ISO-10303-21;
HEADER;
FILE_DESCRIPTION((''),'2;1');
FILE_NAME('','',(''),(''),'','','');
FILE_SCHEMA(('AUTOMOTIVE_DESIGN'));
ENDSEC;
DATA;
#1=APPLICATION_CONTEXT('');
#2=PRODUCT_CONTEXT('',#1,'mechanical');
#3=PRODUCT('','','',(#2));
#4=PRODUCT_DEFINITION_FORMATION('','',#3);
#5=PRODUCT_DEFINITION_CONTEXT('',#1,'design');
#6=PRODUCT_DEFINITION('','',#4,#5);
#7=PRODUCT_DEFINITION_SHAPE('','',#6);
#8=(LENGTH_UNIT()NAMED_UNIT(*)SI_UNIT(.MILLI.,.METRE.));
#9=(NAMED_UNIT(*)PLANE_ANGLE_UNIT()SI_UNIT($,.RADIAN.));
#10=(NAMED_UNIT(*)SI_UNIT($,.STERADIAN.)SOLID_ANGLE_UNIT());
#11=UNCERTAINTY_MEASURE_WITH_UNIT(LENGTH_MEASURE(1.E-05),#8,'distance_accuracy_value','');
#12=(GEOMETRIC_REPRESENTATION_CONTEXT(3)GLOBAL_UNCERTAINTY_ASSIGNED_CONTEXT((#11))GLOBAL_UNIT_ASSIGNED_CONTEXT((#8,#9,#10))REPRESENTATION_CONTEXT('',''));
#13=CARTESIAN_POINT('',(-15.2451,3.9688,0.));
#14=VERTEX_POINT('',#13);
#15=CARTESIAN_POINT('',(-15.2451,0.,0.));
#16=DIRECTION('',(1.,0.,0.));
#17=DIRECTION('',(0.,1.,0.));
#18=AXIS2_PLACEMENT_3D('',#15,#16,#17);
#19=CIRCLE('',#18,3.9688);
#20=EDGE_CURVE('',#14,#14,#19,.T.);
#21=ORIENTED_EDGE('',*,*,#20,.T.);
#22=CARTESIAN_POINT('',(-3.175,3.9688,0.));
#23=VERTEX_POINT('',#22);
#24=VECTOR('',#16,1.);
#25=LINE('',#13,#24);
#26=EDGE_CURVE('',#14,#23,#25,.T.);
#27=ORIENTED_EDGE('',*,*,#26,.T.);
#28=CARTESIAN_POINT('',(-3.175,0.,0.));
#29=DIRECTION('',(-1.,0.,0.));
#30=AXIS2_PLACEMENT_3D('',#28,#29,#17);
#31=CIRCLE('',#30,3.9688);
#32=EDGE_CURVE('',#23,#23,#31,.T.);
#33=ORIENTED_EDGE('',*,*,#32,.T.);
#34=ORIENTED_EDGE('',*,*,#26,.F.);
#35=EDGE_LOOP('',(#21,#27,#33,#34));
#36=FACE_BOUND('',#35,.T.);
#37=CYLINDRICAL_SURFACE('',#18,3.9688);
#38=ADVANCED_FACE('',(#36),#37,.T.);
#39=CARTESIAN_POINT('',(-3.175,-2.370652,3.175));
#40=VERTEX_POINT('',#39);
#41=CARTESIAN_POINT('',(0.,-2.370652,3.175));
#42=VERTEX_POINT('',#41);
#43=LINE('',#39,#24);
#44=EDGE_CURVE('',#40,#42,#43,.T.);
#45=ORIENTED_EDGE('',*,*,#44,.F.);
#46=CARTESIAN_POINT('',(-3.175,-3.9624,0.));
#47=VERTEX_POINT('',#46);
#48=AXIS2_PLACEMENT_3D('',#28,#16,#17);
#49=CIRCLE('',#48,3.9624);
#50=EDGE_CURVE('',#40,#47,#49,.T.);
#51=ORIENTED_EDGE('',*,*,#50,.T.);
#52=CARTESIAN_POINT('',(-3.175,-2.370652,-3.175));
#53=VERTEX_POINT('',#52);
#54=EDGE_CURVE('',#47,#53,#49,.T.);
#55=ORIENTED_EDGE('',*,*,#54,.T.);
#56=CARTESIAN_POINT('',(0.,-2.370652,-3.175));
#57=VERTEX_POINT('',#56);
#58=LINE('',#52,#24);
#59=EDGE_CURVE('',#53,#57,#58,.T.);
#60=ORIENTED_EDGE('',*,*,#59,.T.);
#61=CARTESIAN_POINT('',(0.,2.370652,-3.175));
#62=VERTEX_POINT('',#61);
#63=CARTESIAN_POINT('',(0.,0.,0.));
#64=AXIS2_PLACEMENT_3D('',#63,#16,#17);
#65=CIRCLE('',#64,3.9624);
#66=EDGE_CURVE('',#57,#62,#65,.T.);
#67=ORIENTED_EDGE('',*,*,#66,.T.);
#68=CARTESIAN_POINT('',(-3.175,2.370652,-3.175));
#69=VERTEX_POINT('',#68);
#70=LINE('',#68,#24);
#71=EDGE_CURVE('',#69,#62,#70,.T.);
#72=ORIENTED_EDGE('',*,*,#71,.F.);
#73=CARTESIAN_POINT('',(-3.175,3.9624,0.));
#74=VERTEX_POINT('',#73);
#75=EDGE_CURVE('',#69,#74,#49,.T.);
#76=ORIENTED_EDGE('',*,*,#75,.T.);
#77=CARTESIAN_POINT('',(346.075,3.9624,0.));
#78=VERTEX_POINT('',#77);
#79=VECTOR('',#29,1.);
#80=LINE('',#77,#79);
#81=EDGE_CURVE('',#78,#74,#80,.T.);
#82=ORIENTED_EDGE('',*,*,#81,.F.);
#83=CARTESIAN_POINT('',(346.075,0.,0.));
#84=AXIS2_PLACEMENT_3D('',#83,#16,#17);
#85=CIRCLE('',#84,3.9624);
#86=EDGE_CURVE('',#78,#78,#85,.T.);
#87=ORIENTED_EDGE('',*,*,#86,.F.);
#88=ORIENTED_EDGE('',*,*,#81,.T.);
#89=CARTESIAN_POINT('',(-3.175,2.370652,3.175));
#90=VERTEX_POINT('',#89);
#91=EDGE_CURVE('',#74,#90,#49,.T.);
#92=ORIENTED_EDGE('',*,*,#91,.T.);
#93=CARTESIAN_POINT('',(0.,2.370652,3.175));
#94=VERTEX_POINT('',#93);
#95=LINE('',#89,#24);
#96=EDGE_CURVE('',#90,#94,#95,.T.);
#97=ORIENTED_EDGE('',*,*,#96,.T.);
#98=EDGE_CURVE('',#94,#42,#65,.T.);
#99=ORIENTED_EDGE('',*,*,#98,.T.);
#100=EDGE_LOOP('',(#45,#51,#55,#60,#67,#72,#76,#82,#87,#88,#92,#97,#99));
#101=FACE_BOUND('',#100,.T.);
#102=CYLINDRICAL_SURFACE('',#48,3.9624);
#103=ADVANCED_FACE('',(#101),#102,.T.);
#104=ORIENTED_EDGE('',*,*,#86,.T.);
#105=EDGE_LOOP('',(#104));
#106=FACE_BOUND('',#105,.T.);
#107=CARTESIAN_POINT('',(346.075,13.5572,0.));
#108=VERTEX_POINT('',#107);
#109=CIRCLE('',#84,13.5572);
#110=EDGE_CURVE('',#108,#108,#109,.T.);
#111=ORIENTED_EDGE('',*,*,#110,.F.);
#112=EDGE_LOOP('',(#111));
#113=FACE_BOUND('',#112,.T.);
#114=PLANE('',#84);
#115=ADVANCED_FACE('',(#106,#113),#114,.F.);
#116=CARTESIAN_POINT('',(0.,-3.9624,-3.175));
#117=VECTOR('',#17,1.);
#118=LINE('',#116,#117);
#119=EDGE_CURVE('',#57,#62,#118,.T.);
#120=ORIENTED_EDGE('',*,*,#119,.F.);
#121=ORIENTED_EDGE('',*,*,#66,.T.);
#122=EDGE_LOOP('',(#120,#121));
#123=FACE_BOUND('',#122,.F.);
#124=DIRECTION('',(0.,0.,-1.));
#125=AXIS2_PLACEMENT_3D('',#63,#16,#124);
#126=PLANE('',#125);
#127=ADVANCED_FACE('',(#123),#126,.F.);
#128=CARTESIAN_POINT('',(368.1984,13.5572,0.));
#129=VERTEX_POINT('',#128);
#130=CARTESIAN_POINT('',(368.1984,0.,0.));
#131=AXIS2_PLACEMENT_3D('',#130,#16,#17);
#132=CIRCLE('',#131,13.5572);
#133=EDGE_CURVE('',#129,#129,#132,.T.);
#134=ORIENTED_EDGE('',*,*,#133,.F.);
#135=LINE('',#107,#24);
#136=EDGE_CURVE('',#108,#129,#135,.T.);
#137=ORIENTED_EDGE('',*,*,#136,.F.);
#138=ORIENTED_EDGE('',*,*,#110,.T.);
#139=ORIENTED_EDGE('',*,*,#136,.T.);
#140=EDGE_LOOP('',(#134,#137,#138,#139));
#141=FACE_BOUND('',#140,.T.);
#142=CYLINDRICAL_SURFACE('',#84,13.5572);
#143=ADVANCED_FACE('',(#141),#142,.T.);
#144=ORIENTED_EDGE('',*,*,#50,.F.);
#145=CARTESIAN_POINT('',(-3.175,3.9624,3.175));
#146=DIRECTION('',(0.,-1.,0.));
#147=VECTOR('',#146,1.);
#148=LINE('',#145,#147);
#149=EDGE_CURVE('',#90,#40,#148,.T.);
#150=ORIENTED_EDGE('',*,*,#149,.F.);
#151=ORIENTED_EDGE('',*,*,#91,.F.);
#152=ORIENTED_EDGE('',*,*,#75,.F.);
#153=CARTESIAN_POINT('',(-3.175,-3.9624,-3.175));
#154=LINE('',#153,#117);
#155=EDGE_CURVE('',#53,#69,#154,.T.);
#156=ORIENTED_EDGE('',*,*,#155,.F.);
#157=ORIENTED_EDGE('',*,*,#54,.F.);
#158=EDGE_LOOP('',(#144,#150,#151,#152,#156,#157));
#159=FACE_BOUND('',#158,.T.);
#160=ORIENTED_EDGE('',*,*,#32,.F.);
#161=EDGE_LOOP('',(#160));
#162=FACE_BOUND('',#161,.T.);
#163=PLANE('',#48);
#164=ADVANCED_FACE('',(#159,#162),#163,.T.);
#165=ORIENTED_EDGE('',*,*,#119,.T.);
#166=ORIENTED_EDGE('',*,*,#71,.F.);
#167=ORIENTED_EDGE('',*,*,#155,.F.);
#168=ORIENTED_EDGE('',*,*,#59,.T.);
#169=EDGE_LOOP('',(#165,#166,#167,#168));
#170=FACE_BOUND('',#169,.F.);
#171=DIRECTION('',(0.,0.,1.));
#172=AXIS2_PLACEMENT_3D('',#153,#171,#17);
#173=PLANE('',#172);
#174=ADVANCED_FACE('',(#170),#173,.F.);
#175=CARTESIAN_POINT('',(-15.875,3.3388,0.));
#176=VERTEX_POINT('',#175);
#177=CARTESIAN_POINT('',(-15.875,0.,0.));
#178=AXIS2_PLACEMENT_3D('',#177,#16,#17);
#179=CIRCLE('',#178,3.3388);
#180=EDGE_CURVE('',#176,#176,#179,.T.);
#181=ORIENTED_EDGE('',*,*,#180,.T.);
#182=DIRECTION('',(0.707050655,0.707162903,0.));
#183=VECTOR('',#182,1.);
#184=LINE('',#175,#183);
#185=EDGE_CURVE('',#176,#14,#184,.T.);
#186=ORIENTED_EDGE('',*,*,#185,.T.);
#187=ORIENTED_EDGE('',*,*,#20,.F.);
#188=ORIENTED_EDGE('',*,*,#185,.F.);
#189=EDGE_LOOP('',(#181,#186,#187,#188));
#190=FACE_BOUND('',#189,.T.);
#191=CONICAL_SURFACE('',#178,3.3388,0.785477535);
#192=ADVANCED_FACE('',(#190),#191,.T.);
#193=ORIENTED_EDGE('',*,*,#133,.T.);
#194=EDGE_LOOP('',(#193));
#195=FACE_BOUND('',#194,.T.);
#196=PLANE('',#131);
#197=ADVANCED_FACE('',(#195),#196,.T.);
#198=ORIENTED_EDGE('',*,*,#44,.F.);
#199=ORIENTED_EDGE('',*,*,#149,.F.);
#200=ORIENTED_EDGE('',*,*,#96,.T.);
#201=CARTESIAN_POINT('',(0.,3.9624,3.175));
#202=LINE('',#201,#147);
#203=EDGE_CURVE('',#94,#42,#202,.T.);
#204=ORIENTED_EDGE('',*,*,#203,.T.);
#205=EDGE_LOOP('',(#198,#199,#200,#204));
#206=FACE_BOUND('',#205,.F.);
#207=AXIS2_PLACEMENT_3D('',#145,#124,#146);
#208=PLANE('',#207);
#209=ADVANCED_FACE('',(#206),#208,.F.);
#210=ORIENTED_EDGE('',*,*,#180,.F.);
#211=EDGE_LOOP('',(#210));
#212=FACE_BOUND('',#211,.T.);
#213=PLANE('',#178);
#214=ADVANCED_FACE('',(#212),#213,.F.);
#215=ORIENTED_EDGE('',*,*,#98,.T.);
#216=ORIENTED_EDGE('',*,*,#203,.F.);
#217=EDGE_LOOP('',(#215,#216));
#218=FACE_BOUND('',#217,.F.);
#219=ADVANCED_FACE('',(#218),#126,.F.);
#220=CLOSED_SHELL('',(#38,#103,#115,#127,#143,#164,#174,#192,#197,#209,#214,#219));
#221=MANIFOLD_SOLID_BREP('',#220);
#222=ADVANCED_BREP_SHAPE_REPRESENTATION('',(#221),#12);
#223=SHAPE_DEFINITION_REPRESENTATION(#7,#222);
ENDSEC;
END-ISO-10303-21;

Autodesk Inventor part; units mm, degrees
sketch "Sketch_1" plane through (0, 0, 0) normal (0, 0, 1) x (1, 0, 0)
  line L0 (368.1984, 0) -> (-3.175, 0)
  line L1 (-3.175, 0) -> (-3.175, 3.9624)
  line L2 (-3.175, 3.9624) -> (346.075, 3.9624)
  line L3 (346.075, 3.9624) -> (346.075, 13.5572)
  line L4 (346.075, 13.5572) -> (368.1984, 13.5572)
  line L5 (368.1984, 13.5572) -> (368.1984, 0)
  line L6 (368.1984, 0) -> (-3.175, 0)
revolve "Revolution1" add sketch "Sketch_1" angle 360 about axis through (368.1984, 0, 0) along (1, 0, 0)
sketch "Sketch_3" plane through (0, 0, 0) normal (0, 0, 1) x (1, 0, 0)
  line L0 (-3.175, 0) -> (-15.875, 0)
  line L1 (-15.875, 0) -> (-15.875, 3.3388)
  line L2 (-15.875, 3.3388) -> (-15.2451, 3.9688)
  line L3 (-15.2451, 3.9688) -> (-3.175, 3.9688)
  line L4 (-3.175, 3.9688) -> (-3.175, 0)
  line L5 (-3.175, 0) -> (-15.875, 0)
revolve "Revolution2" add sketch "Sketch_3" angle 360 about axis through (-3.175, 0, 0) along (1, 0, 0)
thread "Thread1" size "5/16-20 UN" class "3A" standard "ANSI Unified Screw Threads" full length
sketch "Sketch_10" plane through (-3.175, 0, 0) normal (1, 0, 0) x (0, 0, -1)
  line L0 (-7.9248, 7.9248) -> (-7.9248, -7.9248)
  line L1 (-7.9248, -7.9248) -> (7.9248, -7.9248)
  line L2 (7.9248, -7.9248) -> (7.9248, 7.9248)
  line L3 (7.9248, 7.9248) -> (-7.9248, 7.9248)
  line L4 (-3.175, 3.9624) -> (-3.175, -3.9624)
  line L5 (-3.175, -3.9624) -> (3.175, -3.9624)
  line L6 (3.175, -3.9624) -> (3.175, 3.9624)
  line L7 (3.175, 3.9624) -> (-3.175, 3.9624)
extrude "Extrusion1" cut sketch "Sketch_10" along normal blind 3.175
ref_plane "rod_cp_XY" through (0, 0, 0) normal (1, 0, 0) x (0, 0, -1)
ref_plane "rod_cp_YZ" through (0, 0, 0) normal (0, 0, -1) x (0, 1, 0)
ref_plane "rod_cp_ZX" through (0, 0, 0) normal (0, 1, 0) x (1, 0, 0)
ref_plane "to_rod_clevis_XY" through (-15.875, 0, 0) normal (1, 0, 0) x (0, 0, -1)
ref_plane "to_rod_clevis_YZ" through (-15.875, 0, 0) normal (0, 0, -1) x (0, 1, 0)
ref_plane "to_rod_clevis_ZX" through (-15.875, 0, 0) normal (0, 1, 0) x (1, 0, 0)
ref_plane "rl2_XY" through (-3.175, 0, 0) normal (1, 0, 0) x (0, 0, -1)
ref_plane "rl2_YZ" through (-3.175, 0, 0) normal (0, 0, -1) x (0, 1, 0)
ref_plane "rl2_ZX" through (-3.175, 0, 0) normal (0, 1, 0) x (1, 0, 0)
ref_plane "rl1_XY" through (-15.875, 0, 0) normal (1, 0, 0) x (0, 0, -1)
ref_plane "rl1_YZ" through (-15.875, 0, 0) normal (0, 0, -1) x (0, 1, 0)
ref_plane "rl1_ZX" through (-15.875, 0, 0) normal (0, 1, 0) x (1, 0, 0)
ref_plane "thd1_XY" through (-15.875, 3.9688, 0) normal (1, 0, 0) x (0, 0, -1)
ref_plane "thd1_YZ" through (-15.875, 3.9688, 0) normal (0, 0, -1) x (0, 1, 0)
ref_plane "thd1_ZX" through (-15.875, 3.9688, 0) normal (0, 1, 0) x (1, 0, 0)
ref_plane "thd2_XY" through (-15.875, -3.9688, 0) normal (1, 0, 0) x (0, 0, -1)
ref_plane "thd2_YZ" through (-15.875, -3.9688, 0) normal (0, 0, -1) x (0, 1, 0)
ref_plane "thd2_ZX" through (-15.875, -3.9688, 0) normal (0, 1, 0) x (1, 0, 0)
ref_plane "dia1_XY" through (-3.175, 3.9624, 0) normal (1, 0, 0) x (0, 0, -1)
ref_plane "dia1_YZ" through (-3.175, 3.9624, 0) normal (0, 0, -1) x (0, 1, 0)
ref_plane "dia1_ZX" through (-3.175, 3.9624, 0) normal (0, 1, 0) x (1, 0, 0)
ref_plane "dia2_XY" through (-3.175, -3.9624, 0) normal (1, 0, 0) x (0, 0, -1)
ref_plane "dia2_YZ" through (-3.175, -3.9624, 0) normal (0, 0, -1) x (0, 1, 0)
ref_plane "dia2_ZX" through (-3.175, -3.9624, 0) normal (0, 1, 0) x (1, 0, 0)
ref_plane "wf1_XY" through (-3.175, 0, 0) normal (1, 0, 0) x (0, 0, -1)
ref_plane "wf1_YZ" through (-3.175, 0, 0) normal (0, 0, -1) x (0, 1, 0)
ref_plane "wf1_ZX" through (-3.175, 0, 0) normal (0, 1, 0) x (1, 0, 0)
ref_plane "wf2_XY" through (0, 0, 0) normal (1, 0, 0) x (0, 0, -1)
ref_plane "wf2_YZ" through (0, 0, 0) normal (0, 0, -1) x (0, 1, 0)
ref_plane "wf2_ZX" through (0, 0, 0) normal (0, 1, 0) x (1, 0, 0)
ref_plane "hh1_XY" through (395.9606, 0, 0) normal (0, 0, 1) x (1, 0, 0)
ref_plane "hh1_YZ" through (395.9606, 0, 0) normal (1, 0, 0) x (0, 1, 0)
ref_plane "hh1_ZX" through (395.9606, 0, 0) normal (0, 1, 0) x (0, 0, 1)
ref_plane "hh2_XY" through (402.3614, 0, 0) normal (0, 0, 1) x (1, 0, 0)
ref_plane "hh2_YZ" through (402.3614, 0, 0) normal (1, 0, 0) x (0, 1, 0)
ref_plane "hh2_ZX" through (402.3614, 0, 0) normal (0, 1, 0) x (0, 0, 1)
ref_plane "dia12_XY" through (0, 0, 14.1351) normal (1, 0, 0) x (0, 0, -1)
ref_plane "dia12_YZ" through (0, 0, 14.1351) normal (0, 0, -1) x (0, 1, 0)
ref_plane "dia12_ZX" through (0, 0, 14.1351) normal (0, 1, 0) x (1, 0, 0)
ref_plane "dia22_XY" through (0, 0, -14.1351) normal (1, 0, 0) x (0, 0, -1)
ref_plane "dia22_YZ" through (0, 0, -14.1351) normal (0, 0, -1) x (0, 1, 0)
ref_plane "dia22_ZX" through (0, 0, -14.1351) normal (0, 1, 0) x (1, 0, 0)
ref_plane "wfw1_XY" through (-3.175, 0, -3.175) normal (0, 1, 0) x (1, 0, 0)
ref_plane "wfw1_YZ" through (-3.175, 0, -3.175) normal (1, 0, 0) x (0, 0, -1)
ref_plane "wfw1_ZX" through (-3.175, 0, -3.175) normal (0, 0, -1) x (0, 1, 0)
ref_plane "wfw2_XY" through (-3.175, 0, 3.175) normal (0, 1, 0) x (1, 0, 0)
ref_plane "wfw2_YZ" through (-3.175, 0, 3.175) normal (1, 0, 0) x (0, 0, -1)
ref_plane "wfw2_ZX" through (-3.175, 0, 3.175) normal (0, 0, -1) x (0, 1, 0)
properties part number "0912-DX0_rod"
